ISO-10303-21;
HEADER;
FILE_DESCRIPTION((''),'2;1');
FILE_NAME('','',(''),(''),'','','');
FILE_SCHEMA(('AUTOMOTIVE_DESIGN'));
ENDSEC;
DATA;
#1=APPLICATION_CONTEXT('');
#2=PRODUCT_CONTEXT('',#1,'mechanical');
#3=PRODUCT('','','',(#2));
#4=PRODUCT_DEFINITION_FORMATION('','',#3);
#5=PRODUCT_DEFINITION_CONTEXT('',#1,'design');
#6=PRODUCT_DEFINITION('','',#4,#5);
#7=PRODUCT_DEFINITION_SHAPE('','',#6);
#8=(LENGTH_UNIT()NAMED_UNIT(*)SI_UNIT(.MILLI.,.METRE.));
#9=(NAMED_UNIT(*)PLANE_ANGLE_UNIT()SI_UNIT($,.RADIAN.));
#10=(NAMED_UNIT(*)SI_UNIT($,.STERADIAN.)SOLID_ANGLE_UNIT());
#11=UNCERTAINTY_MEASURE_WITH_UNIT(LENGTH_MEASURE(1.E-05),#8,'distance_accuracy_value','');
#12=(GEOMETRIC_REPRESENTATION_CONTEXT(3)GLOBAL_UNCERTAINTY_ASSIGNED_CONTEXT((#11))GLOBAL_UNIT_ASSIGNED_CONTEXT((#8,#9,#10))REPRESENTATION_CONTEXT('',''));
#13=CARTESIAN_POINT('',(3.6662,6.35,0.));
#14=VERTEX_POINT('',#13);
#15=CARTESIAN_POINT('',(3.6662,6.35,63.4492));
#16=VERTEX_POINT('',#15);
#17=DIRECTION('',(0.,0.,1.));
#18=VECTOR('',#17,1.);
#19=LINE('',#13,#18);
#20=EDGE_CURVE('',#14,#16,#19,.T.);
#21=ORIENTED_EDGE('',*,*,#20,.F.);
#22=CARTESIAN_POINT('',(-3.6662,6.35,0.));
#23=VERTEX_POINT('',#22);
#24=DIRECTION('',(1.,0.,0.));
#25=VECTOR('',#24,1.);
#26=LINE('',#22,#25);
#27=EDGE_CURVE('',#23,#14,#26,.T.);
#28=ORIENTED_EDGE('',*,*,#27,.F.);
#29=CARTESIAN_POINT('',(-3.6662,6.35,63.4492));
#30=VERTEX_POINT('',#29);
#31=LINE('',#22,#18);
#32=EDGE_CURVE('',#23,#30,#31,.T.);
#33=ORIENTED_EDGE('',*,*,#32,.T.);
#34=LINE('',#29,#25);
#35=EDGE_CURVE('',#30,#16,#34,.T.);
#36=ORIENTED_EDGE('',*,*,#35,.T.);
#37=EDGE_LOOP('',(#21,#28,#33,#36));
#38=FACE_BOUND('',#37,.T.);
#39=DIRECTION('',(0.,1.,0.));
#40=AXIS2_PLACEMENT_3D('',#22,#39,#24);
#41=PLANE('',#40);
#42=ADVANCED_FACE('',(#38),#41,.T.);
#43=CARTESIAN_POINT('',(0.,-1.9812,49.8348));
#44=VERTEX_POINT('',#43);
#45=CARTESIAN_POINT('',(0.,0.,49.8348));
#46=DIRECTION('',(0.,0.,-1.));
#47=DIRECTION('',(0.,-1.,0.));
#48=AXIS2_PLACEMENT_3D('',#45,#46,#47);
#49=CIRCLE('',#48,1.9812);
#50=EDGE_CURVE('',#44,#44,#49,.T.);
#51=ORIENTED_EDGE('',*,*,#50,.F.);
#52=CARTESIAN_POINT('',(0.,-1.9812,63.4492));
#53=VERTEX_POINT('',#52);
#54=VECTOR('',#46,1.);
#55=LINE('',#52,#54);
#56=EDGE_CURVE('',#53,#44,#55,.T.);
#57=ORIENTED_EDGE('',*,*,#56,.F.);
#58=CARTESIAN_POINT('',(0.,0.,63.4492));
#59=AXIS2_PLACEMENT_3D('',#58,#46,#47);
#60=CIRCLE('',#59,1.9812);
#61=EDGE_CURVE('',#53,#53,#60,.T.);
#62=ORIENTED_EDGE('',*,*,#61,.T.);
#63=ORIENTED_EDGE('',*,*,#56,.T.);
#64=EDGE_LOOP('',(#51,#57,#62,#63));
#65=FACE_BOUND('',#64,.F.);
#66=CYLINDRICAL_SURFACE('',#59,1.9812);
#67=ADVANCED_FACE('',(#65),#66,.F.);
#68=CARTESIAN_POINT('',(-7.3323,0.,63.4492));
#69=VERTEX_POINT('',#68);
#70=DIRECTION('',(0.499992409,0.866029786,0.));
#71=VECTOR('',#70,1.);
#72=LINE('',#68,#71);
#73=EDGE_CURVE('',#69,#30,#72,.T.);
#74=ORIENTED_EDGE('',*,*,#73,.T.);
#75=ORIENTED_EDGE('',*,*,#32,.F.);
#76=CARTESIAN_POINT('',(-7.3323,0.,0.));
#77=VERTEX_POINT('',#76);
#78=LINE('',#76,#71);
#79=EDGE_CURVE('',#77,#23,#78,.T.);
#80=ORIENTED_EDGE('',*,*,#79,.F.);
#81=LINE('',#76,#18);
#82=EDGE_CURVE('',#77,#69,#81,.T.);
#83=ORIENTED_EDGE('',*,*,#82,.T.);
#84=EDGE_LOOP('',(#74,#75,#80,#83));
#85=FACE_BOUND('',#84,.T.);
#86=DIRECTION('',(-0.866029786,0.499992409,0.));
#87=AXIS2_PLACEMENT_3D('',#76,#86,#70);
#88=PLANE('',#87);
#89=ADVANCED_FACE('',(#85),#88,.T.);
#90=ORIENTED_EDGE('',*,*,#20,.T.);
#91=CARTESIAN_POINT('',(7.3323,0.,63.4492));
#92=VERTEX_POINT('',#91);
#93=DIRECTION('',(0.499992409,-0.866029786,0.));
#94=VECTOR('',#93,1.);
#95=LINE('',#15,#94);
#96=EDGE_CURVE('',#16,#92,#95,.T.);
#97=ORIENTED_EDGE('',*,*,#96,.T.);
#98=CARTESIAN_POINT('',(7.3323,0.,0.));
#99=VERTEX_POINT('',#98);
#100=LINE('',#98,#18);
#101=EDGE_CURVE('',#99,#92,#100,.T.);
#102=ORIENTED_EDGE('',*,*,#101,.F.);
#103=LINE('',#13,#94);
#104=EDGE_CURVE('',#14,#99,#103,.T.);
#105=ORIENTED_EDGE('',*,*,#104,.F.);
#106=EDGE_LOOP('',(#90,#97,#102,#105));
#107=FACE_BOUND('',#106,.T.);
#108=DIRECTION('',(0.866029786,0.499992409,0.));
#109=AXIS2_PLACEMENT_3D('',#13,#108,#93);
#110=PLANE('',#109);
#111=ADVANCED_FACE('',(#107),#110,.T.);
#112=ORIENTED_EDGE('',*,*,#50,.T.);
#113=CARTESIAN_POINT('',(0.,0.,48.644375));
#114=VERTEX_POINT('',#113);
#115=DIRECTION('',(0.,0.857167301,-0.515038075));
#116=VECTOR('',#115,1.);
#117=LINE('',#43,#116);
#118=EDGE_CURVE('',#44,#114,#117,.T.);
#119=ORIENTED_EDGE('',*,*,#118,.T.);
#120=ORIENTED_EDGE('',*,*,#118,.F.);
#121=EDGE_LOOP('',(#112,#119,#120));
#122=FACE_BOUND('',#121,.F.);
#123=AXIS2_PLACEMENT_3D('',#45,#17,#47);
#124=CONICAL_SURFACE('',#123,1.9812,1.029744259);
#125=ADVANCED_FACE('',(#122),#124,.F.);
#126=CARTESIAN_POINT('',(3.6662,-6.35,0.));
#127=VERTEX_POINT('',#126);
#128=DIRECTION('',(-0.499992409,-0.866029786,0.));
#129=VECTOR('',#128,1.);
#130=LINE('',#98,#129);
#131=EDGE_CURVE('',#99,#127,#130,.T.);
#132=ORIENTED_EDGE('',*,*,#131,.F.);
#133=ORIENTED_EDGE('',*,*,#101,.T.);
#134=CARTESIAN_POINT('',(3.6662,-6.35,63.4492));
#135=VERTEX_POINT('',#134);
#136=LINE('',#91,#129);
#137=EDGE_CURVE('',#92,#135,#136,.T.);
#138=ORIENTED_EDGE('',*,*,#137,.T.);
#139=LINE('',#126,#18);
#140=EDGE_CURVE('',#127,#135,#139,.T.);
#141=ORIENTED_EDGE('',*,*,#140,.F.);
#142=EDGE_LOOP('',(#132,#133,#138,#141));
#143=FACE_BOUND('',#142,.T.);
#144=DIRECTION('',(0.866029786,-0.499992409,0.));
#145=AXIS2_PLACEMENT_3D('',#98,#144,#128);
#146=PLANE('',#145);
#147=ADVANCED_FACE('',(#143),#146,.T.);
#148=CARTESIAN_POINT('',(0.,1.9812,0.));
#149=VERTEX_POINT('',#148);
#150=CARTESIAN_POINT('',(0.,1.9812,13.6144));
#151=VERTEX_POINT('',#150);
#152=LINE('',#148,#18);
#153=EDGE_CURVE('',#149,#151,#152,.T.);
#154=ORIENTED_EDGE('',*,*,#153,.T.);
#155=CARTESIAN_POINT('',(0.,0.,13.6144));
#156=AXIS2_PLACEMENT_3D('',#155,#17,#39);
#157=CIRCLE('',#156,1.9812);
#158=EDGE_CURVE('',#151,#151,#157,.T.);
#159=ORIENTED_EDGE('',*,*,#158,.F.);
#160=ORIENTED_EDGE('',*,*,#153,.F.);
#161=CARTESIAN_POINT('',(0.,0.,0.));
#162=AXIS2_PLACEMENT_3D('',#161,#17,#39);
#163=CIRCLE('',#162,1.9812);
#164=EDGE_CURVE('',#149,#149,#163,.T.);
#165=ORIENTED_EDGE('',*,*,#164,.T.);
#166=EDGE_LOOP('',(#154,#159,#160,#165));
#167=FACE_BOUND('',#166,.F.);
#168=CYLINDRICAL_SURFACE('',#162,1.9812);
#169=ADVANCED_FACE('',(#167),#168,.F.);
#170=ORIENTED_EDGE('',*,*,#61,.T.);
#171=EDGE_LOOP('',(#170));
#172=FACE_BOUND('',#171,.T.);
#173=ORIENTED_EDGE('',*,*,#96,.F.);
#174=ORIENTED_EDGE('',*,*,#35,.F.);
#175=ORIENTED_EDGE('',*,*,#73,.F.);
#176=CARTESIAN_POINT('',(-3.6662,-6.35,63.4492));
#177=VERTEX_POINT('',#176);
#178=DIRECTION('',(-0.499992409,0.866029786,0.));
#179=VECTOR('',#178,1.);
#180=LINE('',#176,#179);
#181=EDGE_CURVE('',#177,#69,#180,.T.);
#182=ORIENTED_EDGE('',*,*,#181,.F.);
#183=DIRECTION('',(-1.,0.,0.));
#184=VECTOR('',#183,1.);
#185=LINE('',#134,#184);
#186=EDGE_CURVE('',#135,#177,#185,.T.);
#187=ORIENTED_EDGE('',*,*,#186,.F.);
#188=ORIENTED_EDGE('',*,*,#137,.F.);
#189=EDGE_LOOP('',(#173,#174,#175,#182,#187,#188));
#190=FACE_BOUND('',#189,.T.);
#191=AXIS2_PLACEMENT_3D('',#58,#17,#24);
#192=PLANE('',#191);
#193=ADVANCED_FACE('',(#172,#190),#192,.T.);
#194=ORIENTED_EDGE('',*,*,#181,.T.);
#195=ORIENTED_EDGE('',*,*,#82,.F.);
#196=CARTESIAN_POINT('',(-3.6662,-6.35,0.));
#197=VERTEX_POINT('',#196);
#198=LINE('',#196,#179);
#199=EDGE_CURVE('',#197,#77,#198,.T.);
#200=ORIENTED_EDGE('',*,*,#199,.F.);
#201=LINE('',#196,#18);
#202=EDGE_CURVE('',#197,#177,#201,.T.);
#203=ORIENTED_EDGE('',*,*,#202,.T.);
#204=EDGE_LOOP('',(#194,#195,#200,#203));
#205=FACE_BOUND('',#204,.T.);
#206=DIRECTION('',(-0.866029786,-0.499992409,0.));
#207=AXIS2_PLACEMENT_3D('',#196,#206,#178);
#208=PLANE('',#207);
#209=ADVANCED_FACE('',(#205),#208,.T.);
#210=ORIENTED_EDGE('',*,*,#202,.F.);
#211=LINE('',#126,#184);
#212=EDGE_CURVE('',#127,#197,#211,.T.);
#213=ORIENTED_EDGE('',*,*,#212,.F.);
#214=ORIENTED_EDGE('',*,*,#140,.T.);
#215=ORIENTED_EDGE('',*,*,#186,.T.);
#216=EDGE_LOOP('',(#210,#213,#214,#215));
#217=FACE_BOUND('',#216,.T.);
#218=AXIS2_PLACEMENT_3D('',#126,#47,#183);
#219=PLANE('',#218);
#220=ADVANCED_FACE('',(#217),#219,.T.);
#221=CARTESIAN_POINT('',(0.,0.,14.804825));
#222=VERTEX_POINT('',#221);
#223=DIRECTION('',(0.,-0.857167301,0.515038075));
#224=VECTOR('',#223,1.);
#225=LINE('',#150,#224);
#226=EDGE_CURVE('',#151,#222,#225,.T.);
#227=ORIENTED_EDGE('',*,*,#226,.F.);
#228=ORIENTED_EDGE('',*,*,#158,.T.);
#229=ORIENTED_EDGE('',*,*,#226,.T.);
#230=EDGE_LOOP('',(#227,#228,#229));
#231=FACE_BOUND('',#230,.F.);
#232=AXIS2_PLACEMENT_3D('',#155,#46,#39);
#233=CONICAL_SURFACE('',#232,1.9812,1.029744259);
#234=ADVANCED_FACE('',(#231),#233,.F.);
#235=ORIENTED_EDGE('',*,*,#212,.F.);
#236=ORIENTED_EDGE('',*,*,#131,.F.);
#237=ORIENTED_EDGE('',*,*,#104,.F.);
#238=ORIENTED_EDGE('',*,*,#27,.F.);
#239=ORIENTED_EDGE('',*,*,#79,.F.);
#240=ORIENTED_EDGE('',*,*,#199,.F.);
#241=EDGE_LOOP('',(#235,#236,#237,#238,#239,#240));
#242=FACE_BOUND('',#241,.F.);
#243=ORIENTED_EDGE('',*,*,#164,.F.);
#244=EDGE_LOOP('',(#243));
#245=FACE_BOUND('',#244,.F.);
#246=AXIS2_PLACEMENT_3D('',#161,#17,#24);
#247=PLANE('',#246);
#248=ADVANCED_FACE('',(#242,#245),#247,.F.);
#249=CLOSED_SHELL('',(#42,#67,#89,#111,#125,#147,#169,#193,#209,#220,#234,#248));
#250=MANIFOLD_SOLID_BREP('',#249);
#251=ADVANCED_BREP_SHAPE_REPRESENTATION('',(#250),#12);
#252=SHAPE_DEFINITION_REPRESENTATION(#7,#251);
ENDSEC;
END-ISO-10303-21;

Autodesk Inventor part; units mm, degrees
ref_plane "YZ Plane" through (0, 0, 0) normal (1, 0, 0) x (0, 1, 0)
ref_plane "XZ Plane" through (0, 0, 0) normal (0, 1, 0) x (-1, 0, 0)
ref_plane "XY Plane" through (0, 0, 0) normal (0, 0, 1) x (1, 0, 0)
sketch "Sketch1" plane through (0, 0, 0) normal (0, 0, 1) x (1, 0, 0)
  line L0 (3.6662, -6.35) -> (-3.6662, -6.35)
  line L1 (-3.6662, -6.35) -> (-7.3323, 0)
  line L2 (-7.3323, 0) -> (-3.6662, 6.35)
  line L3 (-3.6662, 6.35) -> (3.6662, 6.35)
  line L4 (3.6662, 6.35) -> (7.3323, 0)
  line L5 (7.3323, 0) -> (3.6662, -6.35)
  point P0 (0, 0)
  point P1 (0, 0)
  dimension "d0" = 12.7
extrude "Extrusion1" add sketch "Sketch1" along normal blind 63.4492
sketch "Sketch2" plane through (0, 0, 63.4492) normal (0, 0, 1) x (1, 0, 0)
  point P0 (0, 0)
  point P1 (0, 0)
hole "Hole1" at (0, 0, 63.4492) direction (0, 0, -1) diameter 3.9624 depth 13.6144 tip angle 118 thread size "10-32 UNF" class "2B" standard "ANSI Unified Screw Threads"
sketch "Sketch3" plane through (0, 0, 0) normal (0, 0, -1) x (-1, 0, 0)
  circle A0 centre (0, 0) radius 1.9812 projected
hole "Hole2" at (0, 0, 0) direction (0, 0, 1) diameter 3.9624 depth 13.6144 tip angle 118 thread size "10-32 UNF" class "2B" standard "ANSI Unified Screw Threads"
properties part number "STOCK,HEX,SHAFT,TURRET,ENCODER" material "Aluminum 6061"
